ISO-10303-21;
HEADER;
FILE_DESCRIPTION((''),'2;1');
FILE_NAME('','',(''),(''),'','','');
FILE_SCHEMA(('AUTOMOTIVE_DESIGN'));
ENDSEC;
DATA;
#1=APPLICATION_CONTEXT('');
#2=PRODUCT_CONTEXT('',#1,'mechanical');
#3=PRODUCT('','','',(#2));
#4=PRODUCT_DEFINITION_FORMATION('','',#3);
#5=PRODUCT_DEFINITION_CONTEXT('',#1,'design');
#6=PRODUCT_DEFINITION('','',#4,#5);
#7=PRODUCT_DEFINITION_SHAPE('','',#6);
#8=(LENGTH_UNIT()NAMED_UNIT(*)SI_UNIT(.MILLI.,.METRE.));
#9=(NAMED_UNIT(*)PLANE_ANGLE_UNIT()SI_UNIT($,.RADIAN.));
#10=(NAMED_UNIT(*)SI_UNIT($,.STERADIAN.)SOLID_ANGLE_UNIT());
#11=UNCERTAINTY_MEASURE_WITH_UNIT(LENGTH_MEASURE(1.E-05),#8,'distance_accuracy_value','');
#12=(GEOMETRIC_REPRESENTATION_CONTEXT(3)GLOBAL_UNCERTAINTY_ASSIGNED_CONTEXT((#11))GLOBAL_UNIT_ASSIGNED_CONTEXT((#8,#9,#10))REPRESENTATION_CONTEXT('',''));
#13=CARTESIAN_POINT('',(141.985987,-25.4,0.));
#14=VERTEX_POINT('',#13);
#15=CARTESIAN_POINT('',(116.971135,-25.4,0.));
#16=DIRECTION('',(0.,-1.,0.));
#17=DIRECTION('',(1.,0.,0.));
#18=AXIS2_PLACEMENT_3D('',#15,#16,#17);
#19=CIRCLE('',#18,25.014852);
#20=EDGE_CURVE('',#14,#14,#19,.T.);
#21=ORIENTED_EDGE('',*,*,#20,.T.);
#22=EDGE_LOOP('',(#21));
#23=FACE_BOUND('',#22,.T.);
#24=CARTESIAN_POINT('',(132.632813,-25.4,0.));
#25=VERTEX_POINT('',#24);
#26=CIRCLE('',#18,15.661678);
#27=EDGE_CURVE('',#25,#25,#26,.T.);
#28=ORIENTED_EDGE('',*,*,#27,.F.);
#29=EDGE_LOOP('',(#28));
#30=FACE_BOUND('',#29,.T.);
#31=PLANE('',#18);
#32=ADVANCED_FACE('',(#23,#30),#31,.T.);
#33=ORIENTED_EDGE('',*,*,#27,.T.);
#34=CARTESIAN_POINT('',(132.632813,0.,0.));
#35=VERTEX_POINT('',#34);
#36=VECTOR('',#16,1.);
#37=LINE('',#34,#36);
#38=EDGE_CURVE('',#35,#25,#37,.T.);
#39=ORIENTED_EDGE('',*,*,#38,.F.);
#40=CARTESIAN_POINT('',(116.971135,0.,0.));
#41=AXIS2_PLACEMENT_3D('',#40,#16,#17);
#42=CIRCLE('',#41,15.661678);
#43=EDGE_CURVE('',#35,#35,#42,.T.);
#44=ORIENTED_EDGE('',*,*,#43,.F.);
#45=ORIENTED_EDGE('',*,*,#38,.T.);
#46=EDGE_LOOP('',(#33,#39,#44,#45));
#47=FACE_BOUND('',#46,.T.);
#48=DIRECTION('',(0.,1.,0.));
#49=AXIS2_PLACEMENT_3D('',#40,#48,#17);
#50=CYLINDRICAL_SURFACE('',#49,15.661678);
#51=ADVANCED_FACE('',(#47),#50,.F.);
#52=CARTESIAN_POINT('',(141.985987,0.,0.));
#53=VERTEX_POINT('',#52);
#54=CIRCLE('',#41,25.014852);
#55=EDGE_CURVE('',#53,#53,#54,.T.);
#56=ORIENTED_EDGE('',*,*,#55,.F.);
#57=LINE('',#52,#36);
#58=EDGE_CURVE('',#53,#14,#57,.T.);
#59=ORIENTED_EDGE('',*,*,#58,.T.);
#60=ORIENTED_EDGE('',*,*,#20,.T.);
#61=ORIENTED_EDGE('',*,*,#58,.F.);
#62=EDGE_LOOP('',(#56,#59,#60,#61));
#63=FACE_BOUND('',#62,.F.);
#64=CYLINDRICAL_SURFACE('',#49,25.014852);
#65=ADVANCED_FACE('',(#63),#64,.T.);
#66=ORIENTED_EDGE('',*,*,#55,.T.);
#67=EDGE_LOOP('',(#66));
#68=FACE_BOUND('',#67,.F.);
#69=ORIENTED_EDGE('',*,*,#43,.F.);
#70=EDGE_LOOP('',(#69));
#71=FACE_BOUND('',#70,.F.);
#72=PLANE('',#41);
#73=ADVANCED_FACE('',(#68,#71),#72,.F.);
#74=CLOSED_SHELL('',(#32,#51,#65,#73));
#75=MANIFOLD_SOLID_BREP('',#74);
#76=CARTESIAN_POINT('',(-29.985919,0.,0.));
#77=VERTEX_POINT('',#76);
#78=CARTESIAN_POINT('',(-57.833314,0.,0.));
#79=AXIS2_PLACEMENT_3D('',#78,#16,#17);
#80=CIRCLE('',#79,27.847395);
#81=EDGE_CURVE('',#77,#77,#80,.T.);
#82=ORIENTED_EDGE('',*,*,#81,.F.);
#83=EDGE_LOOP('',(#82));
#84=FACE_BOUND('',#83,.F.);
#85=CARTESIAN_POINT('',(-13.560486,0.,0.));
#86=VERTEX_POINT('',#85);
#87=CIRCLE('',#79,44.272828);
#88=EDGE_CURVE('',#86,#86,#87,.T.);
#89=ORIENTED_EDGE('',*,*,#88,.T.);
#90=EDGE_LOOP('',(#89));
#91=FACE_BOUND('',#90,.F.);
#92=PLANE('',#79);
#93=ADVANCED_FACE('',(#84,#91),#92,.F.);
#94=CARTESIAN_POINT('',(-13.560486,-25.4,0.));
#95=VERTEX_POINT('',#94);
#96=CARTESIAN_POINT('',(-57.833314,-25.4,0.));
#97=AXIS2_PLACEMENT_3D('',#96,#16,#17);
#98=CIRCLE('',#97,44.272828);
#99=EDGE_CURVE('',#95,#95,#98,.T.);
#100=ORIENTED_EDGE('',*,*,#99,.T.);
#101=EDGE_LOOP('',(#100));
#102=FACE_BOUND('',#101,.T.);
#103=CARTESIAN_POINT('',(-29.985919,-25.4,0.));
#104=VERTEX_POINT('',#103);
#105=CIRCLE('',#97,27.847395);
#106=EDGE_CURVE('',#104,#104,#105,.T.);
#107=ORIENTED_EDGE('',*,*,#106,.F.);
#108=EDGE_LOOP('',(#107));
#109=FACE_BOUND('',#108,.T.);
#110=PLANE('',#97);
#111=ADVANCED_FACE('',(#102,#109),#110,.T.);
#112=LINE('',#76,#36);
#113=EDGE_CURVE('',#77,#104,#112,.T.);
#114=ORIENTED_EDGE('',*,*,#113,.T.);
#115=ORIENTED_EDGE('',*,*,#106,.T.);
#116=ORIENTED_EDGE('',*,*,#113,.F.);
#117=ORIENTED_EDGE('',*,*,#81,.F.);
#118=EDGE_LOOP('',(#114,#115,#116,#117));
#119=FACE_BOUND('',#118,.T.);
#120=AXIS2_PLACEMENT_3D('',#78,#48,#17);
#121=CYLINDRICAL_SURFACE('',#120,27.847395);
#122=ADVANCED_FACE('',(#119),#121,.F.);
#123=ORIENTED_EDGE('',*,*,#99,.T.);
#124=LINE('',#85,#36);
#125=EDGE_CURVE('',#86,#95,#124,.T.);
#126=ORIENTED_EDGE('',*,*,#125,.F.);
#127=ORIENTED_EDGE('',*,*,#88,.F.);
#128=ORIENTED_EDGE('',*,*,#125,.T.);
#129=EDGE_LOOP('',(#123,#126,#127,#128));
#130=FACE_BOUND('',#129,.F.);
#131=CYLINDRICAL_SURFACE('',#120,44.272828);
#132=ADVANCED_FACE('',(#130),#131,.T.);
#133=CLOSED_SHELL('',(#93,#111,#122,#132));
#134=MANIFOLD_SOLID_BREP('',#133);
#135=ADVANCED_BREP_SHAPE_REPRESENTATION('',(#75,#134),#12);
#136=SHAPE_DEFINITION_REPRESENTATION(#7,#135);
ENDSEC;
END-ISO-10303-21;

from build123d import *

# Parameters (mm, degrees)
F0_R     = 44.2728282083
F0_R_2   = 27.8473949091
F1_DEPTH = 25.4
F2_R     = 25.0148515276
F2_R_2   = 15.6616777409
F3_DEPTH = 25.4


# Not quite as in the source:
# - the program builds the solid bodies; features that only make, move or delete a surface that nothing else refers to are left out


with BuildPart() as f1:
    # F0 (on Front) → F1 (new body)
    with BuildSketch(Plane.XZ):
        with Locations((-57.833313942, 0)):
            Circle(F0_R)
        with Locations((-57.833313942, 0)):
            Circle(F0_R_2, mode=Mode.SUBTRACT)
    extrude(amount=F1_DEPTH)


with BuildPart() as f3:
    # F2 (on Front) → F3 (new body)
    with BuildSketch(Plane.XZ):
        with Locations((116.9711351395, 0)):
            Circle(F2_R)
        with Locations((116.9711351395, 0)):
            Circle(F2_R_2, mode=Mode.SUBTRACT)
    extrude(amount=F3_DEPTH)


solid = Compound([f1.part, f3.part])
